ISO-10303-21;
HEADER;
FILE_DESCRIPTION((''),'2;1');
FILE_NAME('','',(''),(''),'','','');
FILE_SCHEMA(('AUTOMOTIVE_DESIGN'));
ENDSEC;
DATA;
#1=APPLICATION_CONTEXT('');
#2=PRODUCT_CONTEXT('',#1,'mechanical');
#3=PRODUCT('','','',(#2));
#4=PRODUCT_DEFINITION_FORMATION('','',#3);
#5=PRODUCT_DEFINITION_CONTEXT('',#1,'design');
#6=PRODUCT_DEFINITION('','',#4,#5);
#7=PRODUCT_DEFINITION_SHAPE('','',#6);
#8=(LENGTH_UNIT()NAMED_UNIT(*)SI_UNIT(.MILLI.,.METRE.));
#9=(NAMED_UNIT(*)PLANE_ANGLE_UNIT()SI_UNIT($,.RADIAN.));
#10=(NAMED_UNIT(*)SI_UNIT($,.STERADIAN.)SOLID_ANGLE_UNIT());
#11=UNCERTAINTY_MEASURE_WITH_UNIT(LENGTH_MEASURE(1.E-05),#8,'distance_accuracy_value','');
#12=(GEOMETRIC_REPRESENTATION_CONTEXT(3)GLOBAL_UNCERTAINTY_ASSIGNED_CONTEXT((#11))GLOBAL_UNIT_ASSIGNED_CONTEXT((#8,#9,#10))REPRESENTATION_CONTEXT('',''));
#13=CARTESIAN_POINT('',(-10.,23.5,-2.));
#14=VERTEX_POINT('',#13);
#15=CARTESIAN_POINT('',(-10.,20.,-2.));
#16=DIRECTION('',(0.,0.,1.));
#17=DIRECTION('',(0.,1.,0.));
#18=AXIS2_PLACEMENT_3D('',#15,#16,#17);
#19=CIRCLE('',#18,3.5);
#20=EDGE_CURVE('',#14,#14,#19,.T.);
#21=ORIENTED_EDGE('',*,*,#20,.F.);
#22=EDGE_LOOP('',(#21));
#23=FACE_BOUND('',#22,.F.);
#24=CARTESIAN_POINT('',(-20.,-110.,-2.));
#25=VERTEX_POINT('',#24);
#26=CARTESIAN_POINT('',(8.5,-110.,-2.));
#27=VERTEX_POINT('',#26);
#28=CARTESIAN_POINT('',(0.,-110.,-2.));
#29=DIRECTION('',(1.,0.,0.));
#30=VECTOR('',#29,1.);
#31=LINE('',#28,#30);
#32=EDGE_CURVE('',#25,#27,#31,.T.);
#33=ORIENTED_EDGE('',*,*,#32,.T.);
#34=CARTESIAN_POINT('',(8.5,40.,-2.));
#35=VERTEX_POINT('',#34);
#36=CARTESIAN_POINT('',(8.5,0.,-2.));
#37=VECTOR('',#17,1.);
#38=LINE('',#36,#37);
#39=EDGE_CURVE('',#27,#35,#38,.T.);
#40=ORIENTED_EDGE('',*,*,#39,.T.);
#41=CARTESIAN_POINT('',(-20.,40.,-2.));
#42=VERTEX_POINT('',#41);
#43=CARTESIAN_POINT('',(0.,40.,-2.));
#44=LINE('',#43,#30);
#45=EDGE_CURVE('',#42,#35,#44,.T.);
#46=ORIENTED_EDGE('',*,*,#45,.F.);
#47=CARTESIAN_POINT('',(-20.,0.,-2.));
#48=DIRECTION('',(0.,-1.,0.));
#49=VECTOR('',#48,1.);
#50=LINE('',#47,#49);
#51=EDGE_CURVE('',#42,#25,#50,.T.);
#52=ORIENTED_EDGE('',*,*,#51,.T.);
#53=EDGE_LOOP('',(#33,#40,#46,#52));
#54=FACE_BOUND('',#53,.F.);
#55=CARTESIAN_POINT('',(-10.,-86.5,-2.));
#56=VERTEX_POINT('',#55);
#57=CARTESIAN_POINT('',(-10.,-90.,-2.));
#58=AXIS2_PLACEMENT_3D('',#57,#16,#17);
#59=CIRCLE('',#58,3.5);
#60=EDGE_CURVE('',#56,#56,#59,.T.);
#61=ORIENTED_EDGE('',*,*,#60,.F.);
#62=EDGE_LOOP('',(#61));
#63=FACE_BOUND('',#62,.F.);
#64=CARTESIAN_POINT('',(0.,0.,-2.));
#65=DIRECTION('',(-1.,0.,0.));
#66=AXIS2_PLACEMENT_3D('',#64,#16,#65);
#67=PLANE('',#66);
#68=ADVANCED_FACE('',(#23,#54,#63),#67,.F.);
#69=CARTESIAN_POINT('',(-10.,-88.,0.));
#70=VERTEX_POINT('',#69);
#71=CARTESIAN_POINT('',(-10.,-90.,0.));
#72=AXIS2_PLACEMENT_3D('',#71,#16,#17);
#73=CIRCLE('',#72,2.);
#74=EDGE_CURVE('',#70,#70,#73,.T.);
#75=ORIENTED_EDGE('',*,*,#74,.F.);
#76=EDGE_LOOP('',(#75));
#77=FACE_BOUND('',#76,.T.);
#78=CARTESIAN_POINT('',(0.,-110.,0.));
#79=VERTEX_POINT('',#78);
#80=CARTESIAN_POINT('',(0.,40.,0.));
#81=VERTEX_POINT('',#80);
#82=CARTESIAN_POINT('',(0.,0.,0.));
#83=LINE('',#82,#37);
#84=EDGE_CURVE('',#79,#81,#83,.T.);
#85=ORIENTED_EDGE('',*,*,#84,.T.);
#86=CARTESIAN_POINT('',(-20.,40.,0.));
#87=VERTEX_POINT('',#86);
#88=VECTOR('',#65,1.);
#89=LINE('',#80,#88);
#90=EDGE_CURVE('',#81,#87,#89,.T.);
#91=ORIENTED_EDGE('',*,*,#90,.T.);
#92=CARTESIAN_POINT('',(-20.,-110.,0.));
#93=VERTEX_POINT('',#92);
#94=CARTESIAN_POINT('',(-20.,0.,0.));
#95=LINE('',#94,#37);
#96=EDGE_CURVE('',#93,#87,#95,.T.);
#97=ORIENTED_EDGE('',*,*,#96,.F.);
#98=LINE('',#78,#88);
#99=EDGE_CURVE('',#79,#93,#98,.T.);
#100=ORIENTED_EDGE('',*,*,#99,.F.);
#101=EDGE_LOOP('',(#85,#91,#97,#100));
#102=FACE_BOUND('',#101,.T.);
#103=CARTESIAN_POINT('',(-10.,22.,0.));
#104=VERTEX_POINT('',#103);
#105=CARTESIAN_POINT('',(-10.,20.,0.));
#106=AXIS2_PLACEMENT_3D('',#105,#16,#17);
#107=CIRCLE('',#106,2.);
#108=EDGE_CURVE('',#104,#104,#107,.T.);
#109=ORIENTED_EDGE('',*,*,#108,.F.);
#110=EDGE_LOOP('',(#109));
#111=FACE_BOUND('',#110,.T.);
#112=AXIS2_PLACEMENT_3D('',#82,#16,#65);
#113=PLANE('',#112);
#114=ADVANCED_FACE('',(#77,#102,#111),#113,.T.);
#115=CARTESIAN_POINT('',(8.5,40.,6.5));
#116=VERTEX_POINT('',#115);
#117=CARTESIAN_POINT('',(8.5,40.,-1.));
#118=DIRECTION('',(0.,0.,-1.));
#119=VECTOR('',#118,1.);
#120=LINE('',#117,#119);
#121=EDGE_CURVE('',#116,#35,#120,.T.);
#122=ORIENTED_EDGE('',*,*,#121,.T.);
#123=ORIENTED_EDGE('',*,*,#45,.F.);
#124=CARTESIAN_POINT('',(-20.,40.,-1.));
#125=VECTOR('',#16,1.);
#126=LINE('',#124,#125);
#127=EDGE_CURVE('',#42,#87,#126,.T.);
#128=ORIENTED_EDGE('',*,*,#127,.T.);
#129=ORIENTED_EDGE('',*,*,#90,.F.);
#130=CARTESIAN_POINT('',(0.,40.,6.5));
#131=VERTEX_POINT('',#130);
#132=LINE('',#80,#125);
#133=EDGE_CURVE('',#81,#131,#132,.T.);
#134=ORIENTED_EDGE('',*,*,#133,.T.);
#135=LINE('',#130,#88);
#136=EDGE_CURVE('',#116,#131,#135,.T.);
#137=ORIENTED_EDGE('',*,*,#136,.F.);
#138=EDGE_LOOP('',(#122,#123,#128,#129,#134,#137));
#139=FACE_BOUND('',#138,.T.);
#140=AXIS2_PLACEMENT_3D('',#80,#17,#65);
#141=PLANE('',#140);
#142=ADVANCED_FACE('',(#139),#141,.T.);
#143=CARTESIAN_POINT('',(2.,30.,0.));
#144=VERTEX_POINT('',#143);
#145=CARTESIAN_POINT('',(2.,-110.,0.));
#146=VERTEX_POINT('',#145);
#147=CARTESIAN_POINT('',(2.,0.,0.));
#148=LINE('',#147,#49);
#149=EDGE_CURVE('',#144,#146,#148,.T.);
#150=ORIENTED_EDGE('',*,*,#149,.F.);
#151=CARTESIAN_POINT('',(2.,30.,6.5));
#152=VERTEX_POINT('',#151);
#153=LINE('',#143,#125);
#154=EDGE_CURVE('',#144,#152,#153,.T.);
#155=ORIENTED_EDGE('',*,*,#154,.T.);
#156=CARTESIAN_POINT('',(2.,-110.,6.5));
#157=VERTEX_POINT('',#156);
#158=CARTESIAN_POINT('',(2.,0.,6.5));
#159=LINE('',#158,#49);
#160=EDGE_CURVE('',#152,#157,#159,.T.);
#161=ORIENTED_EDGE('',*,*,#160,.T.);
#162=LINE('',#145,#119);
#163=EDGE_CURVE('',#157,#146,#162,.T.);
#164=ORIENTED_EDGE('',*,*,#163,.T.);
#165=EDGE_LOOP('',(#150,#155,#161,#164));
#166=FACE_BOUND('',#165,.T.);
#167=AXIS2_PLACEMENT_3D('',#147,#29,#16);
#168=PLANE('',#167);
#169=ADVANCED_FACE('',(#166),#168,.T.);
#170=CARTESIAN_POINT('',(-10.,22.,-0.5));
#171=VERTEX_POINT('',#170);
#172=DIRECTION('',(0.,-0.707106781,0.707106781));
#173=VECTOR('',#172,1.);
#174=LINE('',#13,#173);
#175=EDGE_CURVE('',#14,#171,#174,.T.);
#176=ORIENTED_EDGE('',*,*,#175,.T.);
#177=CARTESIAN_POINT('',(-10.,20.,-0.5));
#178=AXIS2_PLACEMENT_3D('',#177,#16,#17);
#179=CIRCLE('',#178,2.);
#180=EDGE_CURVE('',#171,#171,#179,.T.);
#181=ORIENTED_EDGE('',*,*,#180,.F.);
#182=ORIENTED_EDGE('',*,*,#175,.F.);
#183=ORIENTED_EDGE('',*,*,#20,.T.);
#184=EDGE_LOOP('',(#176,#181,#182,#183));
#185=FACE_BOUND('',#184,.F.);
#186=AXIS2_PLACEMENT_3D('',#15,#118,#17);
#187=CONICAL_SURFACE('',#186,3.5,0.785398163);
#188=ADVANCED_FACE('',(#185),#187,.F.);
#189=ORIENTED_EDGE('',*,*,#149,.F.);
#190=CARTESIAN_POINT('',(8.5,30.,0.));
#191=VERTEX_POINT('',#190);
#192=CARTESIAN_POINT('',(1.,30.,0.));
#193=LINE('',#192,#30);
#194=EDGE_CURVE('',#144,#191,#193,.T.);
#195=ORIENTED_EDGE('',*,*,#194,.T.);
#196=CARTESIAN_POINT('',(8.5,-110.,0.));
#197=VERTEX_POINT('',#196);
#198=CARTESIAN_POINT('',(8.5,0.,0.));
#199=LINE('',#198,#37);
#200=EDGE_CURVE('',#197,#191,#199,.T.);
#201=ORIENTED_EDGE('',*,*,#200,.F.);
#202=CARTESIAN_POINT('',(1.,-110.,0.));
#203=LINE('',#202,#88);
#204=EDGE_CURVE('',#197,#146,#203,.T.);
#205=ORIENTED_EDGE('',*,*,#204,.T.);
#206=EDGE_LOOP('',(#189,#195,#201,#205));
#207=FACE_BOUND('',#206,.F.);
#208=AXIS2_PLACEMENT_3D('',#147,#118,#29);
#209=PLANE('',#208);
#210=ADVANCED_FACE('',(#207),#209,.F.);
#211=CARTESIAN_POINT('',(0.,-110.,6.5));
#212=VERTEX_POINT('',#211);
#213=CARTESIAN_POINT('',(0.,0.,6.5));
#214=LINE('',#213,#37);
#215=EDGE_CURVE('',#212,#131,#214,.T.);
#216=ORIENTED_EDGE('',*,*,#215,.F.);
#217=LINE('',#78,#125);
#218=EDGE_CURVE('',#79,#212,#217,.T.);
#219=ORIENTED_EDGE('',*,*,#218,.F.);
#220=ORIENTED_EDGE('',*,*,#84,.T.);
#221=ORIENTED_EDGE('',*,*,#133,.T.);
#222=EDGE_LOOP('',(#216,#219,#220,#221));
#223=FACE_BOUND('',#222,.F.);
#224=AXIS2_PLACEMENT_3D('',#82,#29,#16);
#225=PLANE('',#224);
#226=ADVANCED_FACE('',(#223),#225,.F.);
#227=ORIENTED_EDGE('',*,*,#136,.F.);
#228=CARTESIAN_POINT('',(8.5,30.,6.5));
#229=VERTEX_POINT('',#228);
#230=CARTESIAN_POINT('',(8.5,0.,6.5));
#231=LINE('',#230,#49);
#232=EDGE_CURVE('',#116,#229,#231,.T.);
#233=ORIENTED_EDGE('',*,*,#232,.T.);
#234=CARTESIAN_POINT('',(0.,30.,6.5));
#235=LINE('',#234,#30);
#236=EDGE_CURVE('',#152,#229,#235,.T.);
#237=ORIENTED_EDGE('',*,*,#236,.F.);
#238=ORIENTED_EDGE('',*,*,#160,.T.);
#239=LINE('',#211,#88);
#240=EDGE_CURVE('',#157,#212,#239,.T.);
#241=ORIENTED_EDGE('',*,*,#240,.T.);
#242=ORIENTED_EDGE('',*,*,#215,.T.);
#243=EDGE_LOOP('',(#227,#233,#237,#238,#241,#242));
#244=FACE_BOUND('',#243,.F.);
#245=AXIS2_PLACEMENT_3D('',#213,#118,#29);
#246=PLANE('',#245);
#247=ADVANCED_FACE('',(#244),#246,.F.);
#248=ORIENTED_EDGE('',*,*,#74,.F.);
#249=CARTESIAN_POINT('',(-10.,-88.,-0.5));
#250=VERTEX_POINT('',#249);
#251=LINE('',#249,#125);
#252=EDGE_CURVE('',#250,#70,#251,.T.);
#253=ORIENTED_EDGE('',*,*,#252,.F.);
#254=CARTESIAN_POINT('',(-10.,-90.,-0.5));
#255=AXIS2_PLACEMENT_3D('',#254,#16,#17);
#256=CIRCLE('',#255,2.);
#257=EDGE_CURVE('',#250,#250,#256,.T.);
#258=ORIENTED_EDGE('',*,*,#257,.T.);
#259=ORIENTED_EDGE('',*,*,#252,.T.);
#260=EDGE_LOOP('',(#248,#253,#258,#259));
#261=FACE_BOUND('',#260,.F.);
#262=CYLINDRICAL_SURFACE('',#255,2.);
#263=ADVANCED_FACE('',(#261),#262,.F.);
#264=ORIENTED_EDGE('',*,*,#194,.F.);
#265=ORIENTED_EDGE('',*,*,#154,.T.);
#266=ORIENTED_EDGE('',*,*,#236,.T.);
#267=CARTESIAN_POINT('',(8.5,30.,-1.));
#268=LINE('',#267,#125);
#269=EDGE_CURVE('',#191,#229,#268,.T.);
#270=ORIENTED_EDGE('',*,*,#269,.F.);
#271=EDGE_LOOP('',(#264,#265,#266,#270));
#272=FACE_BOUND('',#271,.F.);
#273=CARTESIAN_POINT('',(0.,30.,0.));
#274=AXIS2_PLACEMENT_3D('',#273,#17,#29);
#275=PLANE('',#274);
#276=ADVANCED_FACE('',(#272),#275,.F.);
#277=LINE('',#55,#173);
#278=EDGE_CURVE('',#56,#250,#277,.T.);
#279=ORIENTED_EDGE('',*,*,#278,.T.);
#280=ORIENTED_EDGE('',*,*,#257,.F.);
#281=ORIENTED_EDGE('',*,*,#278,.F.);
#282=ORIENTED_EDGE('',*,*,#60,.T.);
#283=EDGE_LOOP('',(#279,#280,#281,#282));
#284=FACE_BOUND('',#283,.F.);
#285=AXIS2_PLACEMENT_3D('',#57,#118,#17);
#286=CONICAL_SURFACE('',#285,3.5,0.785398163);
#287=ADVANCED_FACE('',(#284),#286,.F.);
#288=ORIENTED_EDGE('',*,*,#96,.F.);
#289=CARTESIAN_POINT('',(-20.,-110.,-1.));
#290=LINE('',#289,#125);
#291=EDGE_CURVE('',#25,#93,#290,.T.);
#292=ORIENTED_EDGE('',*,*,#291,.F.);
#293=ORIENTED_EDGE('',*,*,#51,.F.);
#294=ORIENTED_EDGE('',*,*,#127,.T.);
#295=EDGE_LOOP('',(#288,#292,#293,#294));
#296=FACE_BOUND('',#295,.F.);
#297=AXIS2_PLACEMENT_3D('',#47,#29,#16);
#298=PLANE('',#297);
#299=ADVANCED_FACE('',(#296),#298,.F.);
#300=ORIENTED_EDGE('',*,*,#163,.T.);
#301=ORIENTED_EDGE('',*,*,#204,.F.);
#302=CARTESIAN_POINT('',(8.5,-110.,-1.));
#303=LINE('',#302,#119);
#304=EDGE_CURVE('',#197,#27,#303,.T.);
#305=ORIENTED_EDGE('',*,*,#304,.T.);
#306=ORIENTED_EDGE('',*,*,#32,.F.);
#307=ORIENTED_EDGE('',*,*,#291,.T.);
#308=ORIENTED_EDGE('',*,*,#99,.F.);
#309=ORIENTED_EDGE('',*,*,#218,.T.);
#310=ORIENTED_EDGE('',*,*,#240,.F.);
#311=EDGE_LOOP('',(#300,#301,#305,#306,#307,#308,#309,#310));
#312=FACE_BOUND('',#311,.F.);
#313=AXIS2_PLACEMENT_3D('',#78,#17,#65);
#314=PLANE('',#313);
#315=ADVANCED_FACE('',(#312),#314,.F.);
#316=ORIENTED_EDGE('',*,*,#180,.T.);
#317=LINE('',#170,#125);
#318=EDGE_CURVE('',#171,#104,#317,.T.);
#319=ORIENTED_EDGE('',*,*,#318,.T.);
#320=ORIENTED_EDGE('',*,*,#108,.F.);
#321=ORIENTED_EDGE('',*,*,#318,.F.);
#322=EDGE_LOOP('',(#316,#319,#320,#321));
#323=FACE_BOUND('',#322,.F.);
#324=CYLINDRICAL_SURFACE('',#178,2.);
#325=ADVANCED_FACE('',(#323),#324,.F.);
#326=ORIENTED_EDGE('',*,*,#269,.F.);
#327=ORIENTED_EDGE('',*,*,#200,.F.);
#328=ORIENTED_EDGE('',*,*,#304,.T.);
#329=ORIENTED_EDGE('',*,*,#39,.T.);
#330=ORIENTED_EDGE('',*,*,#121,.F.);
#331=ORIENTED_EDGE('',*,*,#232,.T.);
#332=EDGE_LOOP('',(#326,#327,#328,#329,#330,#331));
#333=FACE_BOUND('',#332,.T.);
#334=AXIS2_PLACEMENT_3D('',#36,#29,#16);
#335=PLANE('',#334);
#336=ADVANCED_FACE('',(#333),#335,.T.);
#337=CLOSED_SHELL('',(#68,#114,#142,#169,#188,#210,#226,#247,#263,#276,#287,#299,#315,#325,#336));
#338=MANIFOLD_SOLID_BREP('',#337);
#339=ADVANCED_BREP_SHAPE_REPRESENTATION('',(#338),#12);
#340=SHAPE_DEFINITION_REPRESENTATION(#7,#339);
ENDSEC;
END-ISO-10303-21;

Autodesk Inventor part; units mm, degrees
ref_plane "YZ Plane" through (0, 0, 0) normal (1, 0, 0) x (0, 1, 0)
ref_plane "XZ Plane" through (0, 0, 0) normal (0, 1, 0) x (-1, 0, 0)
ref_plane "XY Plane" through (0, 0, 0) normal (0, 0, 1) x (1, 0, 0)
sketch "Sketch1" plane through (0, 0, 0) normal (0, 1, 0) x (-1, 0, 0)
  line L0 (0, 0) -> (0, 6.5)
  line L1 (0, 0) -> (20, 0)
  line L2 (0, -2) -> (20, -2)
  line L3 (-2, 0) -> (-2, 6.5)
  line L4 (20, -2) -> (20, 0)
  line L5 (-2, 0) -> (-8.5, 0)
  line L6 (-8.5, -2) -> (0, -2)
  line L7 (0, 6.5) -> (-2, 6.5)
  line L8 (-8.5, -2) -> (-8.5, 0)
  dimension "d2" = 20
  dimension "d3" = 2
  dimension "d5" = 2
  dimension "d32" = 6.5
  dimension "d33" = 6.5
extrude "Extrusion1" add sketch "Sketch1" along normal blind 40
sketch "Sketch4" plane through (0, 40, 0) normal (0, 1, 0) x (1, 0, 0)
  line L0 (8.5, 2) -> (-20, 2) projected
  line L1 (2, 0) -> (8.5, 0) projected
  line L2 (2, 0) -> (8.5, 0)
  line L3 (8.5, 0) -> (8.5, -6.5)
  line L4 (8.5, -6.5) -> (2, -6.5)
  line L5 (2, -6.5) -> (2, 0)
  point P0 (8.5, 0)
  dimension "d34" = 6.5
  dimension "d35" = 6.5
extrude "Extrusion4" add sketch "Sketch4" against normal blind 10
move faces "Move1" translate (0, -110, 0) faces at (-3.8333, 0, -1.3333)
sketch "Sketch3" plane through (22, 0, -2) normal (0, 0, -1) x (-1, 0, 0)
  line L0 (42, 0) -> (42, 40) projected
  circle A0 centre (32, 20) radius 3.5
  circle A1 centre (32, 20) radius 2
  line L1 (32, 20) -> (42, 20)
  line L2 (32, 20) -> (32, -90)
  point P0 (22, 0)
  dimension "d15" = 7
  dimension "d18" = 4
  dimension "d36" = 10
  dimension "d40" = 110
hole "Hole1" at (-10, 20, -2) at (-10, -90, -2) direction (0, 0, 1) diameter 4 end through all countersink diameter 7 countersink angle 90
properties part number "3DPrintBracket_Tall2" material "PC/ABS Plastic"
